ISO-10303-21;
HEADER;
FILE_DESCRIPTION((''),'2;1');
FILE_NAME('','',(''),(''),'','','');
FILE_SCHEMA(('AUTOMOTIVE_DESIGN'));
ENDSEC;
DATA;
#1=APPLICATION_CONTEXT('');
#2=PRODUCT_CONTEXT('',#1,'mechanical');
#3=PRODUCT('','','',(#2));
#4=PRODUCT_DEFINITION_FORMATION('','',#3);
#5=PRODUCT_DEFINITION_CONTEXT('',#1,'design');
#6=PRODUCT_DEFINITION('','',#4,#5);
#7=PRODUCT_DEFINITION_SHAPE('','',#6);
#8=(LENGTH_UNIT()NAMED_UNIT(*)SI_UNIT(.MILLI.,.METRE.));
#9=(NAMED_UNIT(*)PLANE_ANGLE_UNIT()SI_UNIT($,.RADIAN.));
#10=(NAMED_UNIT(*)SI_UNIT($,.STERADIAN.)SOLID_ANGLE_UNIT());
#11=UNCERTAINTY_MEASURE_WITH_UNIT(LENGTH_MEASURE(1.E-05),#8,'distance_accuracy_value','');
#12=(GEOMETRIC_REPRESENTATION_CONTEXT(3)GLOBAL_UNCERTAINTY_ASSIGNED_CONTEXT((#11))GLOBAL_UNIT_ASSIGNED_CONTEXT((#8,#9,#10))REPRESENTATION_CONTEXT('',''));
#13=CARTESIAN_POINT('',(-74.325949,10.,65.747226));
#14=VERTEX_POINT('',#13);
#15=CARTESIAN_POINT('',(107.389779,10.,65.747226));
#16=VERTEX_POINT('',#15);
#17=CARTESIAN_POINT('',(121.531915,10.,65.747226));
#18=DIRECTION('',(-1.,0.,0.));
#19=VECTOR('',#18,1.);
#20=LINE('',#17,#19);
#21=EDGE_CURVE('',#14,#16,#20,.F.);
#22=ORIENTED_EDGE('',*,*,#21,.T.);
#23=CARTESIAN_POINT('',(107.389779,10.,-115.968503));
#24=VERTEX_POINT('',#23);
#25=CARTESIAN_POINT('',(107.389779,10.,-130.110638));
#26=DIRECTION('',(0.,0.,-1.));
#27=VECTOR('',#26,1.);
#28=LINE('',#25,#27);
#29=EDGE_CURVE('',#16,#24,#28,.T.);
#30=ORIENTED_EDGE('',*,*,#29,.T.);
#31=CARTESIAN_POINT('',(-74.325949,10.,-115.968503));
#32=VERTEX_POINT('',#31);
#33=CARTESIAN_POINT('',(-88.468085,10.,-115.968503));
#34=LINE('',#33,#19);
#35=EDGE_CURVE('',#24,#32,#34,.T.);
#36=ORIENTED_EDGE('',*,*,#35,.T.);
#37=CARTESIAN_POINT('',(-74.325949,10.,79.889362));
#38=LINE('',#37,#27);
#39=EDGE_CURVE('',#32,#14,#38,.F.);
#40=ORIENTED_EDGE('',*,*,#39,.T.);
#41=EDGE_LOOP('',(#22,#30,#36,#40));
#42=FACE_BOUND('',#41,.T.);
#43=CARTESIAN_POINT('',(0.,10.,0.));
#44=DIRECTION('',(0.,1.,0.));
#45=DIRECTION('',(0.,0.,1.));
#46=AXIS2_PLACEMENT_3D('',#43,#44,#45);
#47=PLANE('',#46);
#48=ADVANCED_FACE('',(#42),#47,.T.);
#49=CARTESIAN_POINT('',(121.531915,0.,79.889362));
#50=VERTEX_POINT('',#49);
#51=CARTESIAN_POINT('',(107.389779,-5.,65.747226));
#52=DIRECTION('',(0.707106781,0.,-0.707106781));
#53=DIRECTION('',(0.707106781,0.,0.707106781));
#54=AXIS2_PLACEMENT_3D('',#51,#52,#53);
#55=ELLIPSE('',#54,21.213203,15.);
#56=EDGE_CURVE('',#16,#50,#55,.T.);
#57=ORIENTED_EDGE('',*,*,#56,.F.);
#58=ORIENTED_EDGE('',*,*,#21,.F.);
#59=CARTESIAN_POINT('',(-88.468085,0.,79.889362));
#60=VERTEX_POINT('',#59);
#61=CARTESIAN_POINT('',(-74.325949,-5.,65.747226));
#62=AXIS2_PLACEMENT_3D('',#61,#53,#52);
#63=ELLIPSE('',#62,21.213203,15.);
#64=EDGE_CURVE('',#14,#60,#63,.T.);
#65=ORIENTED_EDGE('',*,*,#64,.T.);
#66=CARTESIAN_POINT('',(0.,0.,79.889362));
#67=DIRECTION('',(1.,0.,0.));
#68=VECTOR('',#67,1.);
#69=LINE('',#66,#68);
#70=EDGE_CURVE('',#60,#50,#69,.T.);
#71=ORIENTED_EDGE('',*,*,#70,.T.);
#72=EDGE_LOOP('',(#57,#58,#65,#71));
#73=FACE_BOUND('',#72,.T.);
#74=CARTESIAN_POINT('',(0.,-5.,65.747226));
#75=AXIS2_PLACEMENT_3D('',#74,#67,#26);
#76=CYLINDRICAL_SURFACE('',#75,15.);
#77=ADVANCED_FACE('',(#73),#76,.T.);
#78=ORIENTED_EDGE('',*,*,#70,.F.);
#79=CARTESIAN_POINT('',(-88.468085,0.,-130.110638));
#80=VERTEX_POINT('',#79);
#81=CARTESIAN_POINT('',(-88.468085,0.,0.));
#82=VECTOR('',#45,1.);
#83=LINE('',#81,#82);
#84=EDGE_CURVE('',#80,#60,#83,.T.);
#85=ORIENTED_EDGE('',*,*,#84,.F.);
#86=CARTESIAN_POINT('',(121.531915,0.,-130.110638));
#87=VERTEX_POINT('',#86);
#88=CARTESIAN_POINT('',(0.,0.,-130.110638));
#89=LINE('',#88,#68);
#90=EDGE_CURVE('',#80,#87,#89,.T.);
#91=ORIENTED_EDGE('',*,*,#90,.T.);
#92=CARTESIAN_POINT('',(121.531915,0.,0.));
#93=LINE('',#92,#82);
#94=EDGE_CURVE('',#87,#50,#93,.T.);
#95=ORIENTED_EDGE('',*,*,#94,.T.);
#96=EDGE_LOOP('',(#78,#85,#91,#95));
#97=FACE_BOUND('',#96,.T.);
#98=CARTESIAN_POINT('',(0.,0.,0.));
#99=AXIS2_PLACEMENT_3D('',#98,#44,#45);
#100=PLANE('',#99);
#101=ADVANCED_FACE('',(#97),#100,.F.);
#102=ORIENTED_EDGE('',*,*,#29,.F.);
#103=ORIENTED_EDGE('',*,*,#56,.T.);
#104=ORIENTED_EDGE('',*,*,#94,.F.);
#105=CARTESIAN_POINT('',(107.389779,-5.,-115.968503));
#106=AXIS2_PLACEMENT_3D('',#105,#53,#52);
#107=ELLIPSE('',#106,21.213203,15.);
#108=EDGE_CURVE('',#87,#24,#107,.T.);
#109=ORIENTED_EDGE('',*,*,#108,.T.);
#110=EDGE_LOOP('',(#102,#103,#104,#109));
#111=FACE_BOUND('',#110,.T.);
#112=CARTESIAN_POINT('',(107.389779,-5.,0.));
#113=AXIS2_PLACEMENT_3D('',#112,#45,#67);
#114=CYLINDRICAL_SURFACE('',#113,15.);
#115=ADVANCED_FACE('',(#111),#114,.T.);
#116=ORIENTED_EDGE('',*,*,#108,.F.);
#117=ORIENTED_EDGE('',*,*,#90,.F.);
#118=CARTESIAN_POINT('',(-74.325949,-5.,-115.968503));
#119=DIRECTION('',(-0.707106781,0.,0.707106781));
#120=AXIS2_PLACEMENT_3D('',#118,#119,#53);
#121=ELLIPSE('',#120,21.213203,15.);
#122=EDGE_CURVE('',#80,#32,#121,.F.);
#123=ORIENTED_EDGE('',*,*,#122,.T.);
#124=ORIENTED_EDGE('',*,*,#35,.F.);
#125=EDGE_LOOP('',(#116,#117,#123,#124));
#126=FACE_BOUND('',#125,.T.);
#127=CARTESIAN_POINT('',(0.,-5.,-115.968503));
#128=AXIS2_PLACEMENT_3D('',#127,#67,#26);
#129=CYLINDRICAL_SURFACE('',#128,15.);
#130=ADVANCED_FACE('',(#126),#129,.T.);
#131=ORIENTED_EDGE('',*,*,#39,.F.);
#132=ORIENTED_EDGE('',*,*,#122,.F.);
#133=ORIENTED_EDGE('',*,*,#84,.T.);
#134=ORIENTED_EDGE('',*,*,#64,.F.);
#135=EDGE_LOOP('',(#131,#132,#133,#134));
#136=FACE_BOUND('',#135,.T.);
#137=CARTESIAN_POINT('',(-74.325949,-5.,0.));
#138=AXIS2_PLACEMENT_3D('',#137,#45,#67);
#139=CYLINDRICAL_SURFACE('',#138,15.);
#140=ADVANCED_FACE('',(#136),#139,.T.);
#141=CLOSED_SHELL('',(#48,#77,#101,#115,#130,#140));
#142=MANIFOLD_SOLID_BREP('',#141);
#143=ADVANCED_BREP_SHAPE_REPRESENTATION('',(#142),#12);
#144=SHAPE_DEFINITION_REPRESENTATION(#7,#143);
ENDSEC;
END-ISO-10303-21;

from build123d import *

# Parameters (mm, degrees)
SKETCH1_W           = 184.621276595
SKETCH1_H           = 188.910638298
BOSS_EXTRUDE1_DEPTH = 10
FILLET2_R           = 15


with BuildPart() as part:
    # Sketch1 → Boss-Extrude1 (new body)
    with BuildSketch(Plane(origin=(0, 0, 0), x_dir=(1, 0, 0), z_dir=(0, 1, 0))):
        Polygon((-75.778723404, 119.565957447), (108.842553191, 119.565957447), (121.531914894, 130.110638298), (-88.468085106, 130.110638298), align=None)
        Polygon((108.842553191, 119.565957447), (108.842553191, -69.344680851), (121.531914894, -79.889361702), (121.531914894, 130.110638298), align=None)
        Polygon((108.842553191, -69.344680851), (121.531914894, -79.889361702), (-88.468085106, -79.889361702), (-88.468085106, 130.110638298), (-75.778723404, 119.565957447), (-75.778723404, -69.344680851), align=None)
        with Locations((16.531914894, 25.110638298)):
            Rectangle(SKETCH1_W, SKETCH1_H)
    extrude(amount=BOSS_EXTRUDE1_DEPTH)

    # Fillet2
    # the kernel refuses this fillet: 15 mm, written as the material it takes off along each edge
    with BuildSketch(Plane(origin=(121.531914894, 10, 115.244700761), x_dir=(0, -1, 0), z_dir=(0, 0, -1)), Plane(origin=(156.887253953, 10, -130.110638298), x_dir=(0, -1, 0), z_dir=(-1, 0, 0))) as fillet2_piece_1:
        with BuildLine():
            CenterArc((15, 14.142135624), FILLET2_R, 180, 70.528779366)
            Line((0, 14.142135624), (-0.3, 14.142135624))
            Line((-0.3, 14.142135624), (-0.3, 0))
            Line((-0.3, 0), (0, -0.3))
            ThreePointArc((0, -0.3), (5, -0.3), (9.9, -0.282842712))
            Line((9.9, -0.282842712), (10, 0))
        make_face()
    extrude(amount=280.710678119, mode=Mode.SUBTRACT)
    with BuildSketch(Plane(origin=(-88.468085106, 10, 115.244700761), x_dir=(0, -1, 0), z_dir=(0, 0, -1)), Plane(origin=(156.887253953, 10, 79.889361702), x_dir=(0, -1, 0), z_dir=(-1, 0, 0))) as fillet2_piece_2:
        with BuildLine():
            CenterArc((15, -14.142135624), FILLET2_R, 109.471220634, 70.528779366)
            Line((0, -14.142135624), (-0.3, -14.142135624))
            Line((-0.3, -14.142135624), (-0.3, 0))
            Line((-0.3, 0), (0, 0.3))
            ThreePointArc((0, 0.3), (5, 0.3), (9.9, 0.282842712))
            Line((9.9, 0.282842712), (10, 0))
        make_face()
    extrude(amount=280.710678119, mode=Mode.SUBTRACT)


solid = part.part
